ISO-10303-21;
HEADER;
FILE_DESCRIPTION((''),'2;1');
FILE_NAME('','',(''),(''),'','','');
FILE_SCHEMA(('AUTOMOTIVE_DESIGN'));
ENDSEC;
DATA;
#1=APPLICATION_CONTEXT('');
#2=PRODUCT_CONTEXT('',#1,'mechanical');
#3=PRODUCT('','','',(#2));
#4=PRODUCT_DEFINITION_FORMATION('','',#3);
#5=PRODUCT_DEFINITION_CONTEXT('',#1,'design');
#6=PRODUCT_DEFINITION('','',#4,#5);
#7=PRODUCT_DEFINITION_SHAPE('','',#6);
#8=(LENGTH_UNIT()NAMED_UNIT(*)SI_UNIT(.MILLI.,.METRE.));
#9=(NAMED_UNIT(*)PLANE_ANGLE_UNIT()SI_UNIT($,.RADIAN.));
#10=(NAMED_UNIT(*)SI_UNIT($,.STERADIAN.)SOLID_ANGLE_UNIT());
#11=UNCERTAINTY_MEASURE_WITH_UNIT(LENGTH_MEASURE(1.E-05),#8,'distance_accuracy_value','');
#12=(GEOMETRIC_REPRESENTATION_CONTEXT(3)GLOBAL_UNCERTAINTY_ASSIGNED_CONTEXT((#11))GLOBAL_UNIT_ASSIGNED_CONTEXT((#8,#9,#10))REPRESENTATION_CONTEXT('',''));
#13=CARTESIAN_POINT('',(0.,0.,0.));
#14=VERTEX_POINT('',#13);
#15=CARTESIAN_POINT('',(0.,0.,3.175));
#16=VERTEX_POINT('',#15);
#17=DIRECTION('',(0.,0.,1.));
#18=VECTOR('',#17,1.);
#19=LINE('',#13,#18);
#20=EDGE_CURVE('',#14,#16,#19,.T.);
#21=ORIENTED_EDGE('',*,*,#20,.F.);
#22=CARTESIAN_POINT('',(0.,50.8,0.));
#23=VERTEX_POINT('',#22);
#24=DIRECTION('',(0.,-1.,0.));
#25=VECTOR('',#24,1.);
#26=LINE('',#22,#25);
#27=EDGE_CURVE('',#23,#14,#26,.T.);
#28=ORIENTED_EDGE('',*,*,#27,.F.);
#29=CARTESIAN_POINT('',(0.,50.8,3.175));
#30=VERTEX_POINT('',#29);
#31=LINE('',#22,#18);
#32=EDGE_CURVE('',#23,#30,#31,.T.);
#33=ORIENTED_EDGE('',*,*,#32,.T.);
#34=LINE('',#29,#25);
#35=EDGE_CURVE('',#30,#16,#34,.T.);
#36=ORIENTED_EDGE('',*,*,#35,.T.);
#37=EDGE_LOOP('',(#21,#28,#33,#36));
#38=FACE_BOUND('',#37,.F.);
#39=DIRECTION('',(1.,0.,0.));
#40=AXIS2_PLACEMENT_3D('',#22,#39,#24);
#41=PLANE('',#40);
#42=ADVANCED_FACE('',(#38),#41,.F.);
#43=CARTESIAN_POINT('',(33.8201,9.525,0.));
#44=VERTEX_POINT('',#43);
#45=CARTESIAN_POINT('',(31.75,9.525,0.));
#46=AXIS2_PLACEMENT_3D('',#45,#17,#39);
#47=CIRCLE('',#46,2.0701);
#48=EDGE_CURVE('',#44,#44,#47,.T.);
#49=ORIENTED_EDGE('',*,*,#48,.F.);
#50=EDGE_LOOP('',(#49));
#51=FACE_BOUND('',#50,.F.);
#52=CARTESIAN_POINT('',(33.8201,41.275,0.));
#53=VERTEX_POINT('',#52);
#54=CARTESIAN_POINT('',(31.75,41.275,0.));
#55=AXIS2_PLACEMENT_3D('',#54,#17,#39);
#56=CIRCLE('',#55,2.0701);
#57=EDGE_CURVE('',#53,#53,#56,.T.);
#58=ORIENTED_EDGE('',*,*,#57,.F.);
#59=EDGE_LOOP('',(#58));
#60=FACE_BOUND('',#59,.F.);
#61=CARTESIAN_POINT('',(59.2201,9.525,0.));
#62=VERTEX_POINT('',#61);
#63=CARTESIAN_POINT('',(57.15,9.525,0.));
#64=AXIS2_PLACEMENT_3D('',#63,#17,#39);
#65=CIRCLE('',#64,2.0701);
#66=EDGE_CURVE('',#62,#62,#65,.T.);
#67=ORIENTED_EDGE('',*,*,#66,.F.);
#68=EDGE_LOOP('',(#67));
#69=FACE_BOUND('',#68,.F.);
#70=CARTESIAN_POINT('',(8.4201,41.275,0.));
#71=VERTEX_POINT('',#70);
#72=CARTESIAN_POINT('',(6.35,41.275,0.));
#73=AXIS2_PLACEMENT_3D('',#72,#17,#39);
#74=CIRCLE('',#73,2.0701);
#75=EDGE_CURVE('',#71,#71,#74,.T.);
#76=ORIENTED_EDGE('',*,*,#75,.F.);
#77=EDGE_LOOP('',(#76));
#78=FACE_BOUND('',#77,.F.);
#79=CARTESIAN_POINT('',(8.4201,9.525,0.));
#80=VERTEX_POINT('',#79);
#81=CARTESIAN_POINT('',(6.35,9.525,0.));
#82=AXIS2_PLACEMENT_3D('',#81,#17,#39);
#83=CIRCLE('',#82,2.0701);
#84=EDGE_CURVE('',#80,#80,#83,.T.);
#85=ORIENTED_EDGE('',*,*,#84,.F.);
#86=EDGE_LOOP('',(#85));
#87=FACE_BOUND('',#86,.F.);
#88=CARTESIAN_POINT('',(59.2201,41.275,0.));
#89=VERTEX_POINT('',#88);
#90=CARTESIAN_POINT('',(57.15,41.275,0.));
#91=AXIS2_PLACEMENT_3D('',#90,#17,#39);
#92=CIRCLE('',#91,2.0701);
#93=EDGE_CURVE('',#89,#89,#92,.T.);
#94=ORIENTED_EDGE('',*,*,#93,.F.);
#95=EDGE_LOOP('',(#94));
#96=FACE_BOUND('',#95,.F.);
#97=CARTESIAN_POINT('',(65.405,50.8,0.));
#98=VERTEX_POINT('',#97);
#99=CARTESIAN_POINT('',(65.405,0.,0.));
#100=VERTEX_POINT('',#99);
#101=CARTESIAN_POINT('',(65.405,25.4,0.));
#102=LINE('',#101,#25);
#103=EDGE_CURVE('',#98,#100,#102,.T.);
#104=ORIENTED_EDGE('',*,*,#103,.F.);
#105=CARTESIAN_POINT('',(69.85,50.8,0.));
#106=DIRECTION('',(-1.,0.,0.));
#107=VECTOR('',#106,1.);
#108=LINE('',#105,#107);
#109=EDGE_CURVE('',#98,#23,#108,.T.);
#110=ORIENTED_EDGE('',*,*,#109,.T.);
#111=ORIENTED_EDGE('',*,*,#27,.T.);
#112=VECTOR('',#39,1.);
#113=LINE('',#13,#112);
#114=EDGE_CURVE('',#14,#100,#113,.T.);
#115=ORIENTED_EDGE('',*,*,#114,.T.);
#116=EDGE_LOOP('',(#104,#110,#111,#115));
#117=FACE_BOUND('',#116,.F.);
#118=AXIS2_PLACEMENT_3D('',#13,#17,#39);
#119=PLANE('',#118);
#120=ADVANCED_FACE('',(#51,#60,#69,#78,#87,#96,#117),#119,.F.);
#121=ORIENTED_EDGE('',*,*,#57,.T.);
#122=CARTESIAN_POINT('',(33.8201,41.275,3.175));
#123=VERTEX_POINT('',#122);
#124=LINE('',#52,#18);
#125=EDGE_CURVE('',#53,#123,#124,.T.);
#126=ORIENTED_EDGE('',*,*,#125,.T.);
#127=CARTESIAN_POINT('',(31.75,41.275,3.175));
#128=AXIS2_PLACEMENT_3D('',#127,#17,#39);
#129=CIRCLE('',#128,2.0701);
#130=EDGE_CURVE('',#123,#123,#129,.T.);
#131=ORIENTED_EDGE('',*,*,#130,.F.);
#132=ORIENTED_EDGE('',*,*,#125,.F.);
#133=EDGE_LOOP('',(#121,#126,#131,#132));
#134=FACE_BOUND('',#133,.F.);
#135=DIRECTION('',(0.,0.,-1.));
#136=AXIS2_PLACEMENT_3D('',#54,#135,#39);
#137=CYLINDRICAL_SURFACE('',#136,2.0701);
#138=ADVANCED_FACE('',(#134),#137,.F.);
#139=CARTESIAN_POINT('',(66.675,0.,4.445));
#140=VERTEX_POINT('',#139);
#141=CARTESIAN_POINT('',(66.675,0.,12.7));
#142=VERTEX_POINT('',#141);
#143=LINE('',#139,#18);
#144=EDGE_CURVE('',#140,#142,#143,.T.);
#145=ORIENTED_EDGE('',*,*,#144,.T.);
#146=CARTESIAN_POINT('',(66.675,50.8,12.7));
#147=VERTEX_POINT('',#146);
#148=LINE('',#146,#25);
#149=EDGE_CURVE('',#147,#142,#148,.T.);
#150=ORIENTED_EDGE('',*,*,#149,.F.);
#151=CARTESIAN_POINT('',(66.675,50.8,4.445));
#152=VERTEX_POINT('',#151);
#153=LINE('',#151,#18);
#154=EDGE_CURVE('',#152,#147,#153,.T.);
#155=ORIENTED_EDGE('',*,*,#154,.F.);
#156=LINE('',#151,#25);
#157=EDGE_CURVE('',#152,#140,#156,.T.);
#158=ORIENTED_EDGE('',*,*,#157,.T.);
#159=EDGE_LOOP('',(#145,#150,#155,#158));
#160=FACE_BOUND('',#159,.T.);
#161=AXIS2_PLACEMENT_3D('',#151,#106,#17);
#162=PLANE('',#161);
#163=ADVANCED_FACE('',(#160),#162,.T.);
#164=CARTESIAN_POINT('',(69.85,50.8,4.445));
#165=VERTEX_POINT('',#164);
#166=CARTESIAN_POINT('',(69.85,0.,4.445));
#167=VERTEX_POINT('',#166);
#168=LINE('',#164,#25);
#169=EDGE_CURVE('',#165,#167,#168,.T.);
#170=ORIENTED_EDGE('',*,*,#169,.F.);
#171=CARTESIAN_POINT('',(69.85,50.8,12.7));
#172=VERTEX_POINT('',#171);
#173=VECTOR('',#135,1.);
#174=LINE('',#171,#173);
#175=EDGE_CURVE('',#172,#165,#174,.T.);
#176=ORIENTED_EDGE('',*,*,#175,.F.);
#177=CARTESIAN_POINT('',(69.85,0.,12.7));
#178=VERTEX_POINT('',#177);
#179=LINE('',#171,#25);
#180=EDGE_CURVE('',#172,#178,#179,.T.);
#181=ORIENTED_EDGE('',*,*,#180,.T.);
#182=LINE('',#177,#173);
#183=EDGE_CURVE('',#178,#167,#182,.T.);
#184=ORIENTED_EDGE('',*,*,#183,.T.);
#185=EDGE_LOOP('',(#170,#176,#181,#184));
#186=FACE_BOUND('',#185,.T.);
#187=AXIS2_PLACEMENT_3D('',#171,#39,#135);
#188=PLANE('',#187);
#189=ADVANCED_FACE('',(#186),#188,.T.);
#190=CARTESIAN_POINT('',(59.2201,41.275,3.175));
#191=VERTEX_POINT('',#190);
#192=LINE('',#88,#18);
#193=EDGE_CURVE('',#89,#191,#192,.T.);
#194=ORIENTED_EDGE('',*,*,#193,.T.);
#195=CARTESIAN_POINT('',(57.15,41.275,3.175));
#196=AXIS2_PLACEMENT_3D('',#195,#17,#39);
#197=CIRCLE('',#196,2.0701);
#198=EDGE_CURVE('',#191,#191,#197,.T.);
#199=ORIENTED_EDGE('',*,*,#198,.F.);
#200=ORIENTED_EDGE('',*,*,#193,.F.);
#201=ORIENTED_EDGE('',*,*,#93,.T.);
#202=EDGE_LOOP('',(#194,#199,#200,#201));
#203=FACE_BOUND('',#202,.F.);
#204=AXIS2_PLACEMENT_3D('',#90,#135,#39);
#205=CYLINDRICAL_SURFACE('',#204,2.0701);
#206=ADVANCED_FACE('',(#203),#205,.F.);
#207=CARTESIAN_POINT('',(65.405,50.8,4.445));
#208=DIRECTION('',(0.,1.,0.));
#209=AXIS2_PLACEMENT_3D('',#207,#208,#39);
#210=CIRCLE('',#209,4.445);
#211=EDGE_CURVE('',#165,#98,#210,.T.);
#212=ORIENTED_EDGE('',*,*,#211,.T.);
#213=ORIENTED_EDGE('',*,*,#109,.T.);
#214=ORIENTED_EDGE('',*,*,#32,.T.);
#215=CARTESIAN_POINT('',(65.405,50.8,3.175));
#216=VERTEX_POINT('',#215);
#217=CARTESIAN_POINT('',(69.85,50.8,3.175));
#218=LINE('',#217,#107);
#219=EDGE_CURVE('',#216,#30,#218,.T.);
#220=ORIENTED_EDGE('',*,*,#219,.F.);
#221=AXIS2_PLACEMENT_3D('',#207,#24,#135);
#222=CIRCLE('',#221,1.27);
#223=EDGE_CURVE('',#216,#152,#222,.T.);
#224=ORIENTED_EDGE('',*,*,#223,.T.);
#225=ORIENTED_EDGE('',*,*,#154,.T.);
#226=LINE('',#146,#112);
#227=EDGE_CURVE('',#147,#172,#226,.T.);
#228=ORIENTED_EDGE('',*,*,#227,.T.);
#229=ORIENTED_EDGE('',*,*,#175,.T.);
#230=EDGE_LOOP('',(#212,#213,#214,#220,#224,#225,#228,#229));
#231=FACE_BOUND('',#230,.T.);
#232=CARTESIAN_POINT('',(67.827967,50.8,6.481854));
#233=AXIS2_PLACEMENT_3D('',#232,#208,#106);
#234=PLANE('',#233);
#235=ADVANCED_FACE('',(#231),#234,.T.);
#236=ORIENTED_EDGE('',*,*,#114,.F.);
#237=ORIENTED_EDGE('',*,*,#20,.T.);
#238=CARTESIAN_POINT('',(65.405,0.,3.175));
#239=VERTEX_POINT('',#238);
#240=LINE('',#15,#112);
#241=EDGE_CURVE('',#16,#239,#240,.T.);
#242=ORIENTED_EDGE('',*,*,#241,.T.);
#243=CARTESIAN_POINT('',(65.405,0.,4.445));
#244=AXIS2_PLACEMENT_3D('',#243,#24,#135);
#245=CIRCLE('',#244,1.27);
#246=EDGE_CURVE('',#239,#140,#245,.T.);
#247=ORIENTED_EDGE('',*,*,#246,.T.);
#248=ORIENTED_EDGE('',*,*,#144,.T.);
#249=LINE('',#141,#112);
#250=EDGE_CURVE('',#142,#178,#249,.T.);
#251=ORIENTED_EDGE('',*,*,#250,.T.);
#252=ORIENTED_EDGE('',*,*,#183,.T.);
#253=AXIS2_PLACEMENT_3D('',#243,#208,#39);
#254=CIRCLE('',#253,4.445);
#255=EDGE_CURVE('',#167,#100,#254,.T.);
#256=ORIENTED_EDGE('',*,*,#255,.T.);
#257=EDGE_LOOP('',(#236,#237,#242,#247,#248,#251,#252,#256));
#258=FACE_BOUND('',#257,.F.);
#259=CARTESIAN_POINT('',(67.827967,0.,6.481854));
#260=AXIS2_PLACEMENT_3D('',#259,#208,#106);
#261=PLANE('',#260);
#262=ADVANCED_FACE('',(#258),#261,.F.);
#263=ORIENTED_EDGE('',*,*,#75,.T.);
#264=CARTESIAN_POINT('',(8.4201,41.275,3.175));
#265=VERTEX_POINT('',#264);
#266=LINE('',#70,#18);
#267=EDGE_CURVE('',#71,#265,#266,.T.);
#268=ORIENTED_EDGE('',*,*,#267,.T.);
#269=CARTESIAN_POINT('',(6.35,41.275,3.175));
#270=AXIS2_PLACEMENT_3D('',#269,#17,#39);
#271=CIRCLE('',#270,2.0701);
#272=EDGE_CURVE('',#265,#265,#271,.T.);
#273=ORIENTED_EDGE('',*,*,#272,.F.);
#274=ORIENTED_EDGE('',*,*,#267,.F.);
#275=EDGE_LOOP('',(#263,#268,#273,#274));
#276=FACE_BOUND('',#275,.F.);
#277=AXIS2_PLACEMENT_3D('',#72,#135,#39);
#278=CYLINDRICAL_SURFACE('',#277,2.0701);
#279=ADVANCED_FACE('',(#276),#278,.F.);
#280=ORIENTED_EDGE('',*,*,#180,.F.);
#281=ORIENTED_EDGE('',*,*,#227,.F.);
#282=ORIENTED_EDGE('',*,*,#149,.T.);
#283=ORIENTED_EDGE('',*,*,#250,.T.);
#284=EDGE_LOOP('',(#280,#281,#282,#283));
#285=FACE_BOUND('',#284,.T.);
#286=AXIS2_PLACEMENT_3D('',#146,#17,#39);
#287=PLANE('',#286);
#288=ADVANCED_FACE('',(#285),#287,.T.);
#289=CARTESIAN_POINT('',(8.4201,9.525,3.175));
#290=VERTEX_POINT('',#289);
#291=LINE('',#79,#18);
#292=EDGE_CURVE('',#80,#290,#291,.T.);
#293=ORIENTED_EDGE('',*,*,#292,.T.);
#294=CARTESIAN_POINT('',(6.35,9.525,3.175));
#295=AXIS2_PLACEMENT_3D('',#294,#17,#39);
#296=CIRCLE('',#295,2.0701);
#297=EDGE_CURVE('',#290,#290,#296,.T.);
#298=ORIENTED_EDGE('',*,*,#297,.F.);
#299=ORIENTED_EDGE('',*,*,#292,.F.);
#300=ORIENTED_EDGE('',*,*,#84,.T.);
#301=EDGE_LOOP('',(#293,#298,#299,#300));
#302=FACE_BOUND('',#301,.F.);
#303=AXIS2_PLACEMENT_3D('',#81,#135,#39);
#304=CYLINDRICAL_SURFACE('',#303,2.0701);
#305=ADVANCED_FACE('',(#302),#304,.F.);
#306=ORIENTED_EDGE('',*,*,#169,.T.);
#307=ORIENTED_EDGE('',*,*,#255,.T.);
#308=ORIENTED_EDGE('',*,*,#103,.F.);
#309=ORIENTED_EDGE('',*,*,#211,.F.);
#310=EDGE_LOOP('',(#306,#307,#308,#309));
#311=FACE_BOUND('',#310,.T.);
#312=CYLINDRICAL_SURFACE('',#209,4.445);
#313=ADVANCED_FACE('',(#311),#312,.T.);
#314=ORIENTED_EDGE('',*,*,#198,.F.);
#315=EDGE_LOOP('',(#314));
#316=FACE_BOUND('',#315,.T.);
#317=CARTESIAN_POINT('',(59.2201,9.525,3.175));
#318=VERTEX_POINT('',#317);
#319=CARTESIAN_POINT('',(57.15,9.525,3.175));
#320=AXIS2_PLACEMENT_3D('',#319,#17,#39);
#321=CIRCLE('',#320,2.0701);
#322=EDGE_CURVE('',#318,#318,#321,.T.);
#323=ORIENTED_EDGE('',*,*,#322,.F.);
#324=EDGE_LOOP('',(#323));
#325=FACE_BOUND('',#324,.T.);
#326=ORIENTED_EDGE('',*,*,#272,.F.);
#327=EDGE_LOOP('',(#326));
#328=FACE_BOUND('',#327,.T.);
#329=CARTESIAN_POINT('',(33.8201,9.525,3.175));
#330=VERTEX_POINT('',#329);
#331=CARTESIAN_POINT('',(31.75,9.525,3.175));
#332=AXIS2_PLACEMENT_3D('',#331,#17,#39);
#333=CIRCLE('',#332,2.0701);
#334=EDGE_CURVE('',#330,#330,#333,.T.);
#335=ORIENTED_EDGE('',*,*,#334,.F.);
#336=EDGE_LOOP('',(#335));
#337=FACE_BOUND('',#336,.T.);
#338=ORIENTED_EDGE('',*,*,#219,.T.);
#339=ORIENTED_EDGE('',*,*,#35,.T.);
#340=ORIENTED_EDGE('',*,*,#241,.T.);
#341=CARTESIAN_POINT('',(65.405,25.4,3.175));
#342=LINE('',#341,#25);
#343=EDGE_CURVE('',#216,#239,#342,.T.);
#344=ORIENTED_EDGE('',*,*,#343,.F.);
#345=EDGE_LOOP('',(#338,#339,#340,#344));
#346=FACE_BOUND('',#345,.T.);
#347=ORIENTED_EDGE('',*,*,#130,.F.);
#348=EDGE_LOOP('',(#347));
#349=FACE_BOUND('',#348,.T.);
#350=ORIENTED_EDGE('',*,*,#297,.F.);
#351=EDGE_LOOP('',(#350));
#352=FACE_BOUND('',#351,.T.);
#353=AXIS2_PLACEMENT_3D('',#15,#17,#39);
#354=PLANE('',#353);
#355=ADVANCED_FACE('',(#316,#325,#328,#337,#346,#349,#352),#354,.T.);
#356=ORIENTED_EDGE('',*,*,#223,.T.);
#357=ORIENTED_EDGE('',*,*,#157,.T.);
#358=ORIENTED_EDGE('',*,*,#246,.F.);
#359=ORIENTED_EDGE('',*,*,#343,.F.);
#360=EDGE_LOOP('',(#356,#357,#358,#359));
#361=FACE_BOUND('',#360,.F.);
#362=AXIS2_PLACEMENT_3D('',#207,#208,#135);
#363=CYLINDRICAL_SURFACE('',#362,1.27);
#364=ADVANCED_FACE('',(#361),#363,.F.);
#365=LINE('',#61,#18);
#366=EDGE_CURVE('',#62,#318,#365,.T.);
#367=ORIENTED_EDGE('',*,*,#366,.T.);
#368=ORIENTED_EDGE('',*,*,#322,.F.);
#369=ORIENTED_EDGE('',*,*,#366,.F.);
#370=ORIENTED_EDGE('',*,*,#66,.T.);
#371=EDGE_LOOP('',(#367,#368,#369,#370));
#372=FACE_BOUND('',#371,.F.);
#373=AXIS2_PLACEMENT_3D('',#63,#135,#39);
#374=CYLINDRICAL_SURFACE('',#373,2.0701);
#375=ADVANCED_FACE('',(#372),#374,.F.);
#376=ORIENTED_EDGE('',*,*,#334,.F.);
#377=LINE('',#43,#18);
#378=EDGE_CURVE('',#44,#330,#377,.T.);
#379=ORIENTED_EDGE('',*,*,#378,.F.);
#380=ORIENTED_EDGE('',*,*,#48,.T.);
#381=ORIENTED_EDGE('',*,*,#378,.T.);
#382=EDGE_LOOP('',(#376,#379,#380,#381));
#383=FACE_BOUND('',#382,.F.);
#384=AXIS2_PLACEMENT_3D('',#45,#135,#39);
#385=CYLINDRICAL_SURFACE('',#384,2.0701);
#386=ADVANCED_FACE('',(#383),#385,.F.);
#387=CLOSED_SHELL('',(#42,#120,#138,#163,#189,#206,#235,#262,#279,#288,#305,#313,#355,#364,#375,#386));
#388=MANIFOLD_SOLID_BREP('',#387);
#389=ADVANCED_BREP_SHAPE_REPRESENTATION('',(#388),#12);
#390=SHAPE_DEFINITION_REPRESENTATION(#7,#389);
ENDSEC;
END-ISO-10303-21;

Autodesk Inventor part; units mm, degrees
ref_plane "YZ Plane" through (0, 0, 0) normal (1, 0, 0) x (0, 1, 0)
ref_plane "XZ Plane" through (0, 0, 0) normal (0, 1, 0) x (-1, 0, 0)
ref_plane "XY Plane" through (0, 0, 0) normal (0, 0, 1) x (1, 0, 0)
sketch "Sketch1" plane through (0, 0, 0) normal (0, 0, 1) x (1, 0, 0)
  line L0 (0, 0) -> (69.85, 0)
  line L1 (69.85, 0) -> (69.85, 50.8)
  line L2 (69.85, 50.8) -> (0, 50.8)
  line L3 (0, 50.8) -> (0, 0)
  circle A0 centre (6.35, 9.525) radius 2.0701
  circle A1 centre (31.75, 9.525) radius 2.0701
  circle A2 centre (57.15, 9.525) radius 2.0701
  circle A3 centre (6.35, 41.275) radius 2.0701
  circle A4 centre (31.75, 41.275) radius 2.0701
  circle A5 centre (57.15, 41.275) radius 2.0701
  dimension "d4" = 50.8
  dimension "d5" = 69.85
  dimension "d6" = 4.1402
  dimension "d7" = 6.35
  dimension "d8" = 9.525
  dimension "d9" = 25.4
  dimension "d10" = 31.75
extrude "Plate1" add sketch "Sketch1" along normal blind 3.175
sketch "Sketch2" plane through (66.675, 50.8, 0) normal (1, 0, 0) x (0, 1, 0)
  line L0 (-50.8, 0) -> (0, 0)
  line L1 (0, 0) -> (0, 12.7)
  line L2 (0, 12.7) -> (-50.8, 12.7)
  line L3 (-50.8, 12.7) -> (-50.8, 0)
edge flange "Flange1" height 12.7 angle 90 thickness 3.175 bend radius 1.27 thickness toward (1, 0, 0) relief tear relief width 3.175 relief depth 1.5875 edges at (69.85, 25.4, 3.175) wall of the first edge with corners at (66.675, 0, 0) (66.675, 50.8, 0) (66.675, 50.8, 12.7) (66.675, 0, 12.7)
bend "Bend1"
corner "Corner1"
equation "\"d12\" = BendReliefWidth"
equation "\"d13\" = BendReliefDepth"
equation "\"d14\" = MinimumRemnant"
equation "\"d15\" = BendRadius"
equation "\"d19\" = CornerReliefSize"
equation "\"d20\" = GapSize"
equation "\"d21\" = JacobiRadiusSize"
equation "\"BendRadius\" = Thickness"
equation "\"BendReliefWidth\" = Thickness"
equation "\"BendReliefDepth\" = 0.5 * Thickness"
equation "\"CornerReliefSize\" = 4 * Thickness"
equation "\"MinimumRemnant\" = 2 * Thickness"
equation "\"TransitionRadius\" = BendRadius"
equation "\"JacobiRadiusSize\" = BendRadius"
equation "\"GapSize\" = Thickness"
equation "\"d11\" = BendRadius"
equation "\"Thickness\" = 3.175"
properties part number "Spacer 3" material "Aluminum 6061"
